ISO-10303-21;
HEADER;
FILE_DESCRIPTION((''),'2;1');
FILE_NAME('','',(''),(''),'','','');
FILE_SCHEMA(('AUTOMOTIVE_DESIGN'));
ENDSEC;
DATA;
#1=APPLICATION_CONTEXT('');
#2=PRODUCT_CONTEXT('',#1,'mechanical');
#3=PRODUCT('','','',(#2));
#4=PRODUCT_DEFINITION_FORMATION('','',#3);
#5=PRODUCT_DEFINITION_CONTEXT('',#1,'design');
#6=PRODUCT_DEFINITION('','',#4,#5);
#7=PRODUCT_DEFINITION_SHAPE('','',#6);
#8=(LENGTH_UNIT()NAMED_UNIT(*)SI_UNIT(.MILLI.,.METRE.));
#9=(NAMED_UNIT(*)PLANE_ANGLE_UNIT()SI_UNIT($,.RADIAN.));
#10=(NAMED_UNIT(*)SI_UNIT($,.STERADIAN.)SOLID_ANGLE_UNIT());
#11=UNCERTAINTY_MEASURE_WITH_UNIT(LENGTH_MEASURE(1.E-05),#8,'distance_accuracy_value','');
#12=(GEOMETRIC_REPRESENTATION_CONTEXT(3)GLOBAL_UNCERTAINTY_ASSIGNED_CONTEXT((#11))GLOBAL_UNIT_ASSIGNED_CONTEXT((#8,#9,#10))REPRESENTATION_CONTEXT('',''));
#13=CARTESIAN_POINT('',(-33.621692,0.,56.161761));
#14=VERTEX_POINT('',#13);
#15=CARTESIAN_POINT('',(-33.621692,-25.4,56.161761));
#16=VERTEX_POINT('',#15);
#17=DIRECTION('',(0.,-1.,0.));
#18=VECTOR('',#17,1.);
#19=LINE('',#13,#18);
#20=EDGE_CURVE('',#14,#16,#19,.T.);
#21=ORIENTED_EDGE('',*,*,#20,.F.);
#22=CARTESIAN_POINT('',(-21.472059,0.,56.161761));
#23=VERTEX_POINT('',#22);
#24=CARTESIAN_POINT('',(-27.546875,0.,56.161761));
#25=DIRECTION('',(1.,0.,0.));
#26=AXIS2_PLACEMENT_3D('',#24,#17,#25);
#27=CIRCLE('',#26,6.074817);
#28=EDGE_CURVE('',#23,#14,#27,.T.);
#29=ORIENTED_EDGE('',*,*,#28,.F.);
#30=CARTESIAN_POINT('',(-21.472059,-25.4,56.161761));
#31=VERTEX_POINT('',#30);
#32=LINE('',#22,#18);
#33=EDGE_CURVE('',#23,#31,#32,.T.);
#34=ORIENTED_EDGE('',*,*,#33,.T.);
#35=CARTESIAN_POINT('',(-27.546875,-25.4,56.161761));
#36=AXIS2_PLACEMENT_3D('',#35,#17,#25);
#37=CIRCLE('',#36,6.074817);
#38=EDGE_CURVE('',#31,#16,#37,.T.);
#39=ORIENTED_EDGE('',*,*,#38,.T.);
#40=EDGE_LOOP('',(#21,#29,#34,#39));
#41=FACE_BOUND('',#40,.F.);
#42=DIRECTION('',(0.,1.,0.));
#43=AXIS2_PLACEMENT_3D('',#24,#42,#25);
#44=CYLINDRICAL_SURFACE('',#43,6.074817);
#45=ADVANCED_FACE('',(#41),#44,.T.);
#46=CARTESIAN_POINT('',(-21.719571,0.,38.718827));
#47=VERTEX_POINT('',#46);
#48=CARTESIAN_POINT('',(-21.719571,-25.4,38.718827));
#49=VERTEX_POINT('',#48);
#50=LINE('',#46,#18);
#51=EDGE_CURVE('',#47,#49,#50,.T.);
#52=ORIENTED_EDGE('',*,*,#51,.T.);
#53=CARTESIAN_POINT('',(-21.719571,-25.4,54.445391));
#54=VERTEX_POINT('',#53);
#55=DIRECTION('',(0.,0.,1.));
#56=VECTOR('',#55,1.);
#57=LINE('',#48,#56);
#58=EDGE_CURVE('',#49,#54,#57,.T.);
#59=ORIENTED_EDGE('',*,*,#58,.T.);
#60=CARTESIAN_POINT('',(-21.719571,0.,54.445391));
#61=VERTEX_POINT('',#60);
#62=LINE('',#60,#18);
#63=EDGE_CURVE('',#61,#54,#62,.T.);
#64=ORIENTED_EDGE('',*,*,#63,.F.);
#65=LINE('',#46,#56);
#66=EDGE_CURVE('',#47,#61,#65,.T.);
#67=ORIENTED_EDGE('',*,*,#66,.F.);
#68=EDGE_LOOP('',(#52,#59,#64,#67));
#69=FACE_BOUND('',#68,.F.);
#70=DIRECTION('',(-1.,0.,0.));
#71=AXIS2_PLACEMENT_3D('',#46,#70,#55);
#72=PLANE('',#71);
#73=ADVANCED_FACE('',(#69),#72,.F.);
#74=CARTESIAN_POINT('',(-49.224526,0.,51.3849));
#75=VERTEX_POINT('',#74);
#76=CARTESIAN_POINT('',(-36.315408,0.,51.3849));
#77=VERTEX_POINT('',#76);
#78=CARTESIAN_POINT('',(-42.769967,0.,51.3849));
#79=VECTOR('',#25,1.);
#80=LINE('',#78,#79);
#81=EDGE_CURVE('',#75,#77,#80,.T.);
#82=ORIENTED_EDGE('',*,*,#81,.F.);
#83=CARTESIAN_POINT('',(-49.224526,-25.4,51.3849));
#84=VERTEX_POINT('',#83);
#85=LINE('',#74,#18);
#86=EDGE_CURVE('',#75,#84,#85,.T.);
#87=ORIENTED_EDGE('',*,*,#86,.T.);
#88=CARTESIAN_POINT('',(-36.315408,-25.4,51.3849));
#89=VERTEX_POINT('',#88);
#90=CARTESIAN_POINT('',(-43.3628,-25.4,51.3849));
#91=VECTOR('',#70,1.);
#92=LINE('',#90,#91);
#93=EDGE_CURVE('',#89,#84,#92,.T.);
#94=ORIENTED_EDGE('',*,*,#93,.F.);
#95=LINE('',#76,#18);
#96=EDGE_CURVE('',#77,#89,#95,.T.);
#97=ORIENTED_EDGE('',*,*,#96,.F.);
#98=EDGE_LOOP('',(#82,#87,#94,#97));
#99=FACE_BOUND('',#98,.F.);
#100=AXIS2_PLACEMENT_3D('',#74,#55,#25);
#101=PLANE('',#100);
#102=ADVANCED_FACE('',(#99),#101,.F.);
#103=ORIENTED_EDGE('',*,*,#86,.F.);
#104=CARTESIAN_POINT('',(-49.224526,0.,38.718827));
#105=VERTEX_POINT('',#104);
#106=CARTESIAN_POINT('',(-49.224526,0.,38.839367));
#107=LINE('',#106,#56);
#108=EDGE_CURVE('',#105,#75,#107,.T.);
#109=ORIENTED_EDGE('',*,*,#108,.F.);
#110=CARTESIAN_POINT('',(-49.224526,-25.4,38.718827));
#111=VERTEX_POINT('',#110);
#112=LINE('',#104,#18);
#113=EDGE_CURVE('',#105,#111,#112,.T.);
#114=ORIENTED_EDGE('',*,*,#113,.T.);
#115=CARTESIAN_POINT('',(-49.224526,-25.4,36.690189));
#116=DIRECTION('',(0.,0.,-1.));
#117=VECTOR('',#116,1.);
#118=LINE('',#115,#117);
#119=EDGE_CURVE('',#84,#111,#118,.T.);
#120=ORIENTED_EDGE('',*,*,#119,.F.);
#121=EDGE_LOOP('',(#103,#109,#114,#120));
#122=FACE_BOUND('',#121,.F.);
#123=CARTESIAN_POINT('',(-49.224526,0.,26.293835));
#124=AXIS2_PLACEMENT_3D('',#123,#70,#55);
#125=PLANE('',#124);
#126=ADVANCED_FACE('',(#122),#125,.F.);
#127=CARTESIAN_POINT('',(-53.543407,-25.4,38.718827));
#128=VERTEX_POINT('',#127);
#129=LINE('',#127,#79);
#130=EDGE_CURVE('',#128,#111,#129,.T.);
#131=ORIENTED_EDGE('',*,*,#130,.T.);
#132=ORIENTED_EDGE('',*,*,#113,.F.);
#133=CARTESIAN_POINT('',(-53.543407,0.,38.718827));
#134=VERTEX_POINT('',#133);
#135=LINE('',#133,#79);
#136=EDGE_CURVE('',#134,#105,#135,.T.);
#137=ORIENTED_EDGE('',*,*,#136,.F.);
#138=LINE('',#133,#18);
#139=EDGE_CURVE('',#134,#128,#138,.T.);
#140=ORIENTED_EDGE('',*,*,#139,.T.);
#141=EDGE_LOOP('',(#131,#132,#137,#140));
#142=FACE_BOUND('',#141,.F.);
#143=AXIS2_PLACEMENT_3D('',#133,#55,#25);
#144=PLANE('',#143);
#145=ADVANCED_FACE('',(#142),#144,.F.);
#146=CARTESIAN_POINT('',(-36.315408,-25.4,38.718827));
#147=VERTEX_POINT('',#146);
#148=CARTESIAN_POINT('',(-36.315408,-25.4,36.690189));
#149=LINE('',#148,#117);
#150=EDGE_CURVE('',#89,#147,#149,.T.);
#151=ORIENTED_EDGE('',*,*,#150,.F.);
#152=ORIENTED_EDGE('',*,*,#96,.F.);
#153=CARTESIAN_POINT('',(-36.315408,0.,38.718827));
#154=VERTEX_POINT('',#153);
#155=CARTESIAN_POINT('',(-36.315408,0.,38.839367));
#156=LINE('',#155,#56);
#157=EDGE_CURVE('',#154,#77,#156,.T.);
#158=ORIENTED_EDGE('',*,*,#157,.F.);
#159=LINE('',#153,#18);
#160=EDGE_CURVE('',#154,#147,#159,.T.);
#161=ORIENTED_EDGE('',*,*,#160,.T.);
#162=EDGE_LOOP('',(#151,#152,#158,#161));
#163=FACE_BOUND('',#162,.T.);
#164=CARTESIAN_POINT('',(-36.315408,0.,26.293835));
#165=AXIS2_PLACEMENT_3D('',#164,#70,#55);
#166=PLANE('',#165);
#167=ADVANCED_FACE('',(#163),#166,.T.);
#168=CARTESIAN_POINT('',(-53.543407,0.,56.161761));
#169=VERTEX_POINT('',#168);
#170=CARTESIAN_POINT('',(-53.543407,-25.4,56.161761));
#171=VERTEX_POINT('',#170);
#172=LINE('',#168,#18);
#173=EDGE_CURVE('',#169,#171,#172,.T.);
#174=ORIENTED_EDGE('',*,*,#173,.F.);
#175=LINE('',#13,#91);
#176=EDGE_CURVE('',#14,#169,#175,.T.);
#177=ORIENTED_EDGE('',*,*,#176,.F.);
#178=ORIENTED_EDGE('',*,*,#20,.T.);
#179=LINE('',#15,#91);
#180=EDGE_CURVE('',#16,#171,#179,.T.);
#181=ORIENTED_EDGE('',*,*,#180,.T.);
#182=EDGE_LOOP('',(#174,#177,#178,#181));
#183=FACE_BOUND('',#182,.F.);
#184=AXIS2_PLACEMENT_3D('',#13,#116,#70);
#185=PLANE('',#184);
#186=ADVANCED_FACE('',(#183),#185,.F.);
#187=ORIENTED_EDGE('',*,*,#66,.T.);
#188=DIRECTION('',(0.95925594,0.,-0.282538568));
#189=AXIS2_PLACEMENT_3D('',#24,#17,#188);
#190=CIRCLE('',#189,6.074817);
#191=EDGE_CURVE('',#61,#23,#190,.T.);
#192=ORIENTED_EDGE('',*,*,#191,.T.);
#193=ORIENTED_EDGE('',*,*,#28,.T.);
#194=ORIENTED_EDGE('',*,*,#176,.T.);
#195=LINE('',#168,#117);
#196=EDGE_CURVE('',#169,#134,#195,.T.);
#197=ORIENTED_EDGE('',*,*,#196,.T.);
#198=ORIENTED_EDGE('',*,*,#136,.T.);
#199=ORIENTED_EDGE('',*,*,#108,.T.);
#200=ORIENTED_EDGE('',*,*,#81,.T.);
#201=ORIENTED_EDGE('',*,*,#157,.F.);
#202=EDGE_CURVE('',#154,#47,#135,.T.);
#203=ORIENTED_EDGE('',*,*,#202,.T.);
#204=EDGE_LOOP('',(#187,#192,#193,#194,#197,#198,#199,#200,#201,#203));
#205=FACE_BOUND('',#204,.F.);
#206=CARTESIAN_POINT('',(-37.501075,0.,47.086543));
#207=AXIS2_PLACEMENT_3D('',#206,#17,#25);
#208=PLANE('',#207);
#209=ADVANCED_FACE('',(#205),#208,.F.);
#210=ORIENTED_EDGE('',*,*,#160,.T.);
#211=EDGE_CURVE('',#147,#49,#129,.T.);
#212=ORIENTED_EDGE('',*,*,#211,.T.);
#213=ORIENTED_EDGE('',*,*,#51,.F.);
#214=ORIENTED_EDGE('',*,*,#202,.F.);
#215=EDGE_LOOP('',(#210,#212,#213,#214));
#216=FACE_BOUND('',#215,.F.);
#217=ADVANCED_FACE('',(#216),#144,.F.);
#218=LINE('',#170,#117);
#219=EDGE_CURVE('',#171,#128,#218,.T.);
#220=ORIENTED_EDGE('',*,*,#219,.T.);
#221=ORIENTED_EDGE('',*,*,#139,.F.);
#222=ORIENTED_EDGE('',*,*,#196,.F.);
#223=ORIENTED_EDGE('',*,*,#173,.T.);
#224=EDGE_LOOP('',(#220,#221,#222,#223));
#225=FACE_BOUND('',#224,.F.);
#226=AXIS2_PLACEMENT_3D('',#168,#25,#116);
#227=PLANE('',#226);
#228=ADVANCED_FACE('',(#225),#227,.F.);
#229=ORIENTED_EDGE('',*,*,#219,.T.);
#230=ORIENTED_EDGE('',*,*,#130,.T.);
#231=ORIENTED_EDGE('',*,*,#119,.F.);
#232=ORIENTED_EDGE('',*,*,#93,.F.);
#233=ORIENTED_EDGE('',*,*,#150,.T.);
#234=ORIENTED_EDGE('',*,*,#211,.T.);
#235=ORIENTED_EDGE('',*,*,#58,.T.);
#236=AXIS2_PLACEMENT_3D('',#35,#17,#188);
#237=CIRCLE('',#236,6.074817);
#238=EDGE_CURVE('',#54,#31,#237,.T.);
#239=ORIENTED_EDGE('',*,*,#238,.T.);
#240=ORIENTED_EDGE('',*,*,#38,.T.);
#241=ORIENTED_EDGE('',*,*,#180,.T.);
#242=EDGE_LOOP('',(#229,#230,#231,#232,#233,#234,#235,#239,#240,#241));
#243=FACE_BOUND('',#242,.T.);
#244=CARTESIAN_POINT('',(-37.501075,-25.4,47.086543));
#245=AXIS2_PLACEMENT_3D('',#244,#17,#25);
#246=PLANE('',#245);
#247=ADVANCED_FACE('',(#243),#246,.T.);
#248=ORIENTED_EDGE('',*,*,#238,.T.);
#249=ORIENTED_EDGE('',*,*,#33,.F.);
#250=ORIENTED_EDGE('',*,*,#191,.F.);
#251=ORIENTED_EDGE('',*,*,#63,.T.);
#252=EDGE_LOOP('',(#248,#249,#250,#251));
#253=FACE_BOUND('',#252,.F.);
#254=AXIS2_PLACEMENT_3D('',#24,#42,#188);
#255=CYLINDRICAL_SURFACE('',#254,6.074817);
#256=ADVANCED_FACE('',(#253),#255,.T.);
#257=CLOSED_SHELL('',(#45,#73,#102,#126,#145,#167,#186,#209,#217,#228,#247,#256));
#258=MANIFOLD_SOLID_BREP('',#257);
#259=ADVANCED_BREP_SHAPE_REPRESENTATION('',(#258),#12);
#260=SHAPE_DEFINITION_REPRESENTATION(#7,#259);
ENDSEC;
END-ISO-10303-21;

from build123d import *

# Parameters (mm, degrees)
F1_DEPTH = 25.4
F2_W     = 12.9091180861
F2_H     = 25.0910650939
F3_DEPTH = 28.702


with BuildPart() as f1:
    # F0 (on Front) → F1 (new body)
    with BuildSketch(Plane.XZ):
        with BuildLine():
            Line((-33.6216918521, 56.1617612839), (-53.54340747, 56.1617612839))
            Line((-53.54340747, 56.1617612839), (-53.54340747, 38.7188270688))
            Line((-53.54340747, 38.7188270688), (-21.719571203, 38.7188270688))
            Line((-21.719571203, 38.7188270688), (-21.719571203, 54.4453912809))
            ThreePointArc((-21.719571203, 54.4453912809), (-28.4139375356, 50.1491411825), (-33.6216918521, 56.1617612839))
        make_face()
        with BuildLine():
            ThreePointArc((-21.4720585056, 56.1617612839), (-27.5468751788, 62.2365779571), (-33.6216918521, 56.1617612839))
            Line((-33.6216918521, 56.1617612839), (-21.719571203, 56.1617612839))
            Line((-21.719571203, 56.1617612839), (-21.719571203, 54.4453912809))
            ThreePointArc((-21.719571203, 54.4453912809), (-21.5342550775, 55.2946989271), (-21.4720585056, 56.1617612839))
        make_face()
        with BuildLine():
            Line((-21.719571203, 56.1617612839), (-33.6216918521, 56.1617612839))
            ThreePointArc((-33.6216918521, 56.1617612839), (-28.4139375356, 50.1491411825), (-21.719571203, 54.4453912809))
            Line((-21.719571203, 54.4453912809), (-21.719571203, 56.1617612839))
        make_face()
    extrude(amount=F1_DEPTH)

    # F2 (on Front) → F3 (cut)
    with BuildSketch(Plane.XZ):
        with Locations((-42.769966647, 38.8393672183)):
            Rectangle(F2_W, F2_H)
    extrude(amount=F3_DEPTH, mode=Mode.SUBTRACT)


solid = f1.part
